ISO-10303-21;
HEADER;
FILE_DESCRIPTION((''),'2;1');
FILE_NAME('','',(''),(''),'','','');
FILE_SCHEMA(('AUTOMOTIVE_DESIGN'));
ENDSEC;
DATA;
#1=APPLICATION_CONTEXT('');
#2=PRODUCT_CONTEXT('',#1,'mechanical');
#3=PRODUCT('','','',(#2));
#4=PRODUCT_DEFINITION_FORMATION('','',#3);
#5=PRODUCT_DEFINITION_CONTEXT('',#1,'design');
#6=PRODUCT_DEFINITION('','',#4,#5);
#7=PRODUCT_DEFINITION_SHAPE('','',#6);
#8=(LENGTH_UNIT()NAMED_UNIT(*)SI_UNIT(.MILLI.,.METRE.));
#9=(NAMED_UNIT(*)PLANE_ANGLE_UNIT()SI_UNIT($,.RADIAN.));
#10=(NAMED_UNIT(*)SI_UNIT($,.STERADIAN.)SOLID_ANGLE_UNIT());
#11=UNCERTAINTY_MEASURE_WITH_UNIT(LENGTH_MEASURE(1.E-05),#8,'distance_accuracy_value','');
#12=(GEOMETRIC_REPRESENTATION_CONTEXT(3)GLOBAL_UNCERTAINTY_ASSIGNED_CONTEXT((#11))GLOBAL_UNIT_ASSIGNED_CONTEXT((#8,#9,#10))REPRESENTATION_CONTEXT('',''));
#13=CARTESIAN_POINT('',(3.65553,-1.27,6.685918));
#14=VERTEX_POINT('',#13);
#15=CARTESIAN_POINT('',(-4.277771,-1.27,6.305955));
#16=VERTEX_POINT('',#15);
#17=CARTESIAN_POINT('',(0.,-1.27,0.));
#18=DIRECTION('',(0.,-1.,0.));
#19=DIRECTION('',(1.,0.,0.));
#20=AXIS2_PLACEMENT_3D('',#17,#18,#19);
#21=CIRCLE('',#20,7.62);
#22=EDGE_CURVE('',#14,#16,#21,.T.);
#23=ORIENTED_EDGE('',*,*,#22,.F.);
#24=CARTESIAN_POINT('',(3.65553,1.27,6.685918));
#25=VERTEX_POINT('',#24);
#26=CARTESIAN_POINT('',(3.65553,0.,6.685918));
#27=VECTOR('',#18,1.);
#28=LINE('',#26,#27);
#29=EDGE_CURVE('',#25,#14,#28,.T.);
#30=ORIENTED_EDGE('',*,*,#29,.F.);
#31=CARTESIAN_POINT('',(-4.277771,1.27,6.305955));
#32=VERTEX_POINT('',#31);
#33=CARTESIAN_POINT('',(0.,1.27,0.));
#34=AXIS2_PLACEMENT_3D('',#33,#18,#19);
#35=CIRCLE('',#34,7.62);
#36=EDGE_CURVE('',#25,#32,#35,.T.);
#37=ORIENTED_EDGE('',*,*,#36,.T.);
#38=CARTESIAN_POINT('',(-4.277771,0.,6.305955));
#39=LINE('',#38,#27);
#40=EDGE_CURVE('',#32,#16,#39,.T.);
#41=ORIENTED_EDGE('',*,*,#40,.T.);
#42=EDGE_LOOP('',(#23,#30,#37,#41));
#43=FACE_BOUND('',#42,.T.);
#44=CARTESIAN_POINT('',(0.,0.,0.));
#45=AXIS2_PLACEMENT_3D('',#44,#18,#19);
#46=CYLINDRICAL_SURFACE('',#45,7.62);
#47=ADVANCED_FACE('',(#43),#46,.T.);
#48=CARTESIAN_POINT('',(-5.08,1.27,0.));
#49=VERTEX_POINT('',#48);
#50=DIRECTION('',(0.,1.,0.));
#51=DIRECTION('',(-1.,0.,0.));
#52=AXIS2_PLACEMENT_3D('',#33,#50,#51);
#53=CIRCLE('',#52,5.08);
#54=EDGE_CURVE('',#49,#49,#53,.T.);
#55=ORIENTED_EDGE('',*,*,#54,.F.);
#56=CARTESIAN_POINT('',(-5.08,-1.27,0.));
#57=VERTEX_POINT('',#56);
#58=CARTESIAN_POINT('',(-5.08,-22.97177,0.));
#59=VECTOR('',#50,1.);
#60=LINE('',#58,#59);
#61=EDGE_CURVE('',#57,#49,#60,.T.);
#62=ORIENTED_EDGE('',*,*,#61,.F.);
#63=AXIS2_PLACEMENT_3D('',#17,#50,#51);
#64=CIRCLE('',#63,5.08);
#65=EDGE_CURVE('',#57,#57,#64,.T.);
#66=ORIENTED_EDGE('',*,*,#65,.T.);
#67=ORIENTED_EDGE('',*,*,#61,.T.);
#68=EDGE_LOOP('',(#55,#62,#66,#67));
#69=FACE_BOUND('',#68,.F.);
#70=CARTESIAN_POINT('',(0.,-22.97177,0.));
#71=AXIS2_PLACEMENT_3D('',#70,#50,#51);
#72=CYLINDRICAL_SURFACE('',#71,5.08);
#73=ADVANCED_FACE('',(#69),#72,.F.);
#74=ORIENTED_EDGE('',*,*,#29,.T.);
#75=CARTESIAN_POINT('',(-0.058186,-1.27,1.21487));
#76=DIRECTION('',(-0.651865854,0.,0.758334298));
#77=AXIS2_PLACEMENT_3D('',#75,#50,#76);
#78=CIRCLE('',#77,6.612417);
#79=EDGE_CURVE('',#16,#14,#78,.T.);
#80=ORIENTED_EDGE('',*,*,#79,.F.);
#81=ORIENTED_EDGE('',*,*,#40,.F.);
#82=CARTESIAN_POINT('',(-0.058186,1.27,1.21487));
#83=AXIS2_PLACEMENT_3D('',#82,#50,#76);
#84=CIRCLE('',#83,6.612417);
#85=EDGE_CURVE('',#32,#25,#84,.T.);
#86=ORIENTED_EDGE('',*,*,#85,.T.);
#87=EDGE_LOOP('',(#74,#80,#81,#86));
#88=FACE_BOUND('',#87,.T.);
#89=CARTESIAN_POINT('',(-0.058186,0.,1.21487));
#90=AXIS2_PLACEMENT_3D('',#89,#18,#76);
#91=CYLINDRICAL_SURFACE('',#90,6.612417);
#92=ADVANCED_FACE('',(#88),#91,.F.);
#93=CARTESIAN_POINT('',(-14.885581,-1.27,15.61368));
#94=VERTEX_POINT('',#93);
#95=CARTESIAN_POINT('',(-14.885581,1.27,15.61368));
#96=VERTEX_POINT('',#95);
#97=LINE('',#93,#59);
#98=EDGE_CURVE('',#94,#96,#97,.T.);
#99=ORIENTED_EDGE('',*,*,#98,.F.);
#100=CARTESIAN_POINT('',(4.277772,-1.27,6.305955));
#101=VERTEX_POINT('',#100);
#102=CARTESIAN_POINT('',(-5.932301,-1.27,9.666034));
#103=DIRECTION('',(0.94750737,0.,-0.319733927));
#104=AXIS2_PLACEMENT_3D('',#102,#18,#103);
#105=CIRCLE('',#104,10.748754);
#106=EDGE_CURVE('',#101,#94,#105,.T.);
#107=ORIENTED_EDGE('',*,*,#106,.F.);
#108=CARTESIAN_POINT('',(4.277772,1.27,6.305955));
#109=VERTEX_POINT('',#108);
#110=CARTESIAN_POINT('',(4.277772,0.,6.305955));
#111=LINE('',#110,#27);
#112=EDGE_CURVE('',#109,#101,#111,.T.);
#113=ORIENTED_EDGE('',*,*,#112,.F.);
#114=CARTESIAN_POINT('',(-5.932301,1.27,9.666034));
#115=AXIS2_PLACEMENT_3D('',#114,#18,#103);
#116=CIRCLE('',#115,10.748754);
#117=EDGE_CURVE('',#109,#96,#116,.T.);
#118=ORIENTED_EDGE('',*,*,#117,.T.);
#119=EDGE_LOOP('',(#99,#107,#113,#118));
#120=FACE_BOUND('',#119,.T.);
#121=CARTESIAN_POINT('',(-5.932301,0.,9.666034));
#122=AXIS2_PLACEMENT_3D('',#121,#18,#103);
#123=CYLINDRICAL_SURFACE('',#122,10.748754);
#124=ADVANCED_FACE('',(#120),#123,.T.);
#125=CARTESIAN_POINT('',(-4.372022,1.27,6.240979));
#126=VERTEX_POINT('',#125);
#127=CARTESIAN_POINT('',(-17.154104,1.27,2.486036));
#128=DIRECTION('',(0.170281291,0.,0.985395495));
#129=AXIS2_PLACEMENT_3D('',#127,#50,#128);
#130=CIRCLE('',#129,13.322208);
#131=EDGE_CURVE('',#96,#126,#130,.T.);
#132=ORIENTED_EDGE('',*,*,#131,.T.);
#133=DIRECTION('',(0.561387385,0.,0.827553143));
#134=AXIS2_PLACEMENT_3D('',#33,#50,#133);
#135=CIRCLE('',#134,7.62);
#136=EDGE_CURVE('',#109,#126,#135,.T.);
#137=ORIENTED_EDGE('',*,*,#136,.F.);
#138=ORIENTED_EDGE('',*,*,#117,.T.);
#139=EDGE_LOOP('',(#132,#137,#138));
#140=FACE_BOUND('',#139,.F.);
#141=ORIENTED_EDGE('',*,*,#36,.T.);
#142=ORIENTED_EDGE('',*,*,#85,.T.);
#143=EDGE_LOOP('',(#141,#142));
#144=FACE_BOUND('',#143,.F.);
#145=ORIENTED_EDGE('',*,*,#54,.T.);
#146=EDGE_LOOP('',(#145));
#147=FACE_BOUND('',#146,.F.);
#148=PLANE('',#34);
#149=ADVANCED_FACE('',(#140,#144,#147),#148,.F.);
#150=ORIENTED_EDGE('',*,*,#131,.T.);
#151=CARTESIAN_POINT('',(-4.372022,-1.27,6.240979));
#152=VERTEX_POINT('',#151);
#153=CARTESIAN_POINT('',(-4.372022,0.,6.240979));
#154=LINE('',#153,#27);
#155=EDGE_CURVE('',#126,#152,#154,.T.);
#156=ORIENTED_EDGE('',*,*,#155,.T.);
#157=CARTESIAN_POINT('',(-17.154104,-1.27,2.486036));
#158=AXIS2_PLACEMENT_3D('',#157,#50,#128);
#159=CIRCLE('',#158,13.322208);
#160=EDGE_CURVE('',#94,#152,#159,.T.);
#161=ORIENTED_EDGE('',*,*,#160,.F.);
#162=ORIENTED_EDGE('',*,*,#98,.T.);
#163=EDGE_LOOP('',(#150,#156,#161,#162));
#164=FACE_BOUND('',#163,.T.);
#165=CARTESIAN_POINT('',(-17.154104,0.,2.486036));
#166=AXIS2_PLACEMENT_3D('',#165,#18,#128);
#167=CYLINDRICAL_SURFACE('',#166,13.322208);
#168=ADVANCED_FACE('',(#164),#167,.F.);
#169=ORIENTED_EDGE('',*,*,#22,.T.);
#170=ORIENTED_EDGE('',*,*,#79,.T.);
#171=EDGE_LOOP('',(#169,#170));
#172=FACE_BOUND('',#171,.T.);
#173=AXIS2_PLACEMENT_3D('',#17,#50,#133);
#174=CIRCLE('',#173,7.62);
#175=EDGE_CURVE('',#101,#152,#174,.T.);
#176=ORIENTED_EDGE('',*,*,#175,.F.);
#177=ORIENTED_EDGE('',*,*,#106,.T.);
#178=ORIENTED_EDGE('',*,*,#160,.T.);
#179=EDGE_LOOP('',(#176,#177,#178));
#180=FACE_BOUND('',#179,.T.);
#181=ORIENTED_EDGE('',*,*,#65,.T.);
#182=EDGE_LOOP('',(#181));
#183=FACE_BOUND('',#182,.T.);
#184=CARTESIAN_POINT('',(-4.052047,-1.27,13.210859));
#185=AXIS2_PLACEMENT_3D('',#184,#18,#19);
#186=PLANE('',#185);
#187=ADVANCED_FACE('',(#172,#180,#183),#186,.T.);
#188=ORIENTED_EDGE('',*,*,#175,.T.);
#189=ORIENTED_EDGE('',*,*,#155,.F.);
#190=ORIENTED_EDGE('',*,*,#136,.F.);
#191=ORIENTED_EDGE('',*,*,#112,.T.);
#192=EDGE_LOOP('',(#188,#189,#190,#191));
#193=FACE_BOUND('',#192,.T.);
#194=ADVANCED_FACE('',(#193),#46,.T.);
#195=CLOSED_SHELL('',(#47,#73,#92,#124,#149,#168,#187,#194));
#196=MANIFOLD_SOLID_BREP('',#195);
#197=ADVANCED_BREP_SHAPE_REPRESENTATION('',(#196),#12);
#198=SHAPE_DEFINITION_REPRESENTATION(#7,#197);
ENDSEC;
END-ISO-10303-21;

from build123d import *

# Parameters (mm, degrees)
F0_R     = 7.62
F1_DEPTH = 1.27
F3_D     = 10.16
F5_DEPTH = 1.27


# Not quite as in the source:
# - a feature names something its author has since deleted; it is built from what else it names


with BuildPart() as f1:
    # F0 (on Front) → F1 (new body, symmetric)
    with BuildSketch(Plane.XZ):
        Circle(F0_R)
    extrude(amount=F1_DEPTH, both=True)

    # F3 (through all)
    with Locations(Plane.XZ.offset(1.27)):
        with Locations((0, 0)):
            Hole(F3_D / 2)

    # F4 (on Front) → F5 (join, symmetric)
    with BuildSketch(Plane.XZ):
        with BuildLine():
            ThreePointArc((-4.368594382, 6.2292921357), (-0.0581857965, 7.8272864293), (4.2522227889, 6.2292921357))
            ThreePointArc((4.2522227889, 6.2292921357), (-1.1998943931, 19.3169425848), (-14.8855810985, 15.6136797741))
            ThreePointArc((-14.8855810985, 15.6136797741), (-8.2843431722, 12.4262859834), (-4.368594382, 6.2292921357))
        make_face()
    extrude(amount=F5_DEPTH, both=True)


solid = f1.part
